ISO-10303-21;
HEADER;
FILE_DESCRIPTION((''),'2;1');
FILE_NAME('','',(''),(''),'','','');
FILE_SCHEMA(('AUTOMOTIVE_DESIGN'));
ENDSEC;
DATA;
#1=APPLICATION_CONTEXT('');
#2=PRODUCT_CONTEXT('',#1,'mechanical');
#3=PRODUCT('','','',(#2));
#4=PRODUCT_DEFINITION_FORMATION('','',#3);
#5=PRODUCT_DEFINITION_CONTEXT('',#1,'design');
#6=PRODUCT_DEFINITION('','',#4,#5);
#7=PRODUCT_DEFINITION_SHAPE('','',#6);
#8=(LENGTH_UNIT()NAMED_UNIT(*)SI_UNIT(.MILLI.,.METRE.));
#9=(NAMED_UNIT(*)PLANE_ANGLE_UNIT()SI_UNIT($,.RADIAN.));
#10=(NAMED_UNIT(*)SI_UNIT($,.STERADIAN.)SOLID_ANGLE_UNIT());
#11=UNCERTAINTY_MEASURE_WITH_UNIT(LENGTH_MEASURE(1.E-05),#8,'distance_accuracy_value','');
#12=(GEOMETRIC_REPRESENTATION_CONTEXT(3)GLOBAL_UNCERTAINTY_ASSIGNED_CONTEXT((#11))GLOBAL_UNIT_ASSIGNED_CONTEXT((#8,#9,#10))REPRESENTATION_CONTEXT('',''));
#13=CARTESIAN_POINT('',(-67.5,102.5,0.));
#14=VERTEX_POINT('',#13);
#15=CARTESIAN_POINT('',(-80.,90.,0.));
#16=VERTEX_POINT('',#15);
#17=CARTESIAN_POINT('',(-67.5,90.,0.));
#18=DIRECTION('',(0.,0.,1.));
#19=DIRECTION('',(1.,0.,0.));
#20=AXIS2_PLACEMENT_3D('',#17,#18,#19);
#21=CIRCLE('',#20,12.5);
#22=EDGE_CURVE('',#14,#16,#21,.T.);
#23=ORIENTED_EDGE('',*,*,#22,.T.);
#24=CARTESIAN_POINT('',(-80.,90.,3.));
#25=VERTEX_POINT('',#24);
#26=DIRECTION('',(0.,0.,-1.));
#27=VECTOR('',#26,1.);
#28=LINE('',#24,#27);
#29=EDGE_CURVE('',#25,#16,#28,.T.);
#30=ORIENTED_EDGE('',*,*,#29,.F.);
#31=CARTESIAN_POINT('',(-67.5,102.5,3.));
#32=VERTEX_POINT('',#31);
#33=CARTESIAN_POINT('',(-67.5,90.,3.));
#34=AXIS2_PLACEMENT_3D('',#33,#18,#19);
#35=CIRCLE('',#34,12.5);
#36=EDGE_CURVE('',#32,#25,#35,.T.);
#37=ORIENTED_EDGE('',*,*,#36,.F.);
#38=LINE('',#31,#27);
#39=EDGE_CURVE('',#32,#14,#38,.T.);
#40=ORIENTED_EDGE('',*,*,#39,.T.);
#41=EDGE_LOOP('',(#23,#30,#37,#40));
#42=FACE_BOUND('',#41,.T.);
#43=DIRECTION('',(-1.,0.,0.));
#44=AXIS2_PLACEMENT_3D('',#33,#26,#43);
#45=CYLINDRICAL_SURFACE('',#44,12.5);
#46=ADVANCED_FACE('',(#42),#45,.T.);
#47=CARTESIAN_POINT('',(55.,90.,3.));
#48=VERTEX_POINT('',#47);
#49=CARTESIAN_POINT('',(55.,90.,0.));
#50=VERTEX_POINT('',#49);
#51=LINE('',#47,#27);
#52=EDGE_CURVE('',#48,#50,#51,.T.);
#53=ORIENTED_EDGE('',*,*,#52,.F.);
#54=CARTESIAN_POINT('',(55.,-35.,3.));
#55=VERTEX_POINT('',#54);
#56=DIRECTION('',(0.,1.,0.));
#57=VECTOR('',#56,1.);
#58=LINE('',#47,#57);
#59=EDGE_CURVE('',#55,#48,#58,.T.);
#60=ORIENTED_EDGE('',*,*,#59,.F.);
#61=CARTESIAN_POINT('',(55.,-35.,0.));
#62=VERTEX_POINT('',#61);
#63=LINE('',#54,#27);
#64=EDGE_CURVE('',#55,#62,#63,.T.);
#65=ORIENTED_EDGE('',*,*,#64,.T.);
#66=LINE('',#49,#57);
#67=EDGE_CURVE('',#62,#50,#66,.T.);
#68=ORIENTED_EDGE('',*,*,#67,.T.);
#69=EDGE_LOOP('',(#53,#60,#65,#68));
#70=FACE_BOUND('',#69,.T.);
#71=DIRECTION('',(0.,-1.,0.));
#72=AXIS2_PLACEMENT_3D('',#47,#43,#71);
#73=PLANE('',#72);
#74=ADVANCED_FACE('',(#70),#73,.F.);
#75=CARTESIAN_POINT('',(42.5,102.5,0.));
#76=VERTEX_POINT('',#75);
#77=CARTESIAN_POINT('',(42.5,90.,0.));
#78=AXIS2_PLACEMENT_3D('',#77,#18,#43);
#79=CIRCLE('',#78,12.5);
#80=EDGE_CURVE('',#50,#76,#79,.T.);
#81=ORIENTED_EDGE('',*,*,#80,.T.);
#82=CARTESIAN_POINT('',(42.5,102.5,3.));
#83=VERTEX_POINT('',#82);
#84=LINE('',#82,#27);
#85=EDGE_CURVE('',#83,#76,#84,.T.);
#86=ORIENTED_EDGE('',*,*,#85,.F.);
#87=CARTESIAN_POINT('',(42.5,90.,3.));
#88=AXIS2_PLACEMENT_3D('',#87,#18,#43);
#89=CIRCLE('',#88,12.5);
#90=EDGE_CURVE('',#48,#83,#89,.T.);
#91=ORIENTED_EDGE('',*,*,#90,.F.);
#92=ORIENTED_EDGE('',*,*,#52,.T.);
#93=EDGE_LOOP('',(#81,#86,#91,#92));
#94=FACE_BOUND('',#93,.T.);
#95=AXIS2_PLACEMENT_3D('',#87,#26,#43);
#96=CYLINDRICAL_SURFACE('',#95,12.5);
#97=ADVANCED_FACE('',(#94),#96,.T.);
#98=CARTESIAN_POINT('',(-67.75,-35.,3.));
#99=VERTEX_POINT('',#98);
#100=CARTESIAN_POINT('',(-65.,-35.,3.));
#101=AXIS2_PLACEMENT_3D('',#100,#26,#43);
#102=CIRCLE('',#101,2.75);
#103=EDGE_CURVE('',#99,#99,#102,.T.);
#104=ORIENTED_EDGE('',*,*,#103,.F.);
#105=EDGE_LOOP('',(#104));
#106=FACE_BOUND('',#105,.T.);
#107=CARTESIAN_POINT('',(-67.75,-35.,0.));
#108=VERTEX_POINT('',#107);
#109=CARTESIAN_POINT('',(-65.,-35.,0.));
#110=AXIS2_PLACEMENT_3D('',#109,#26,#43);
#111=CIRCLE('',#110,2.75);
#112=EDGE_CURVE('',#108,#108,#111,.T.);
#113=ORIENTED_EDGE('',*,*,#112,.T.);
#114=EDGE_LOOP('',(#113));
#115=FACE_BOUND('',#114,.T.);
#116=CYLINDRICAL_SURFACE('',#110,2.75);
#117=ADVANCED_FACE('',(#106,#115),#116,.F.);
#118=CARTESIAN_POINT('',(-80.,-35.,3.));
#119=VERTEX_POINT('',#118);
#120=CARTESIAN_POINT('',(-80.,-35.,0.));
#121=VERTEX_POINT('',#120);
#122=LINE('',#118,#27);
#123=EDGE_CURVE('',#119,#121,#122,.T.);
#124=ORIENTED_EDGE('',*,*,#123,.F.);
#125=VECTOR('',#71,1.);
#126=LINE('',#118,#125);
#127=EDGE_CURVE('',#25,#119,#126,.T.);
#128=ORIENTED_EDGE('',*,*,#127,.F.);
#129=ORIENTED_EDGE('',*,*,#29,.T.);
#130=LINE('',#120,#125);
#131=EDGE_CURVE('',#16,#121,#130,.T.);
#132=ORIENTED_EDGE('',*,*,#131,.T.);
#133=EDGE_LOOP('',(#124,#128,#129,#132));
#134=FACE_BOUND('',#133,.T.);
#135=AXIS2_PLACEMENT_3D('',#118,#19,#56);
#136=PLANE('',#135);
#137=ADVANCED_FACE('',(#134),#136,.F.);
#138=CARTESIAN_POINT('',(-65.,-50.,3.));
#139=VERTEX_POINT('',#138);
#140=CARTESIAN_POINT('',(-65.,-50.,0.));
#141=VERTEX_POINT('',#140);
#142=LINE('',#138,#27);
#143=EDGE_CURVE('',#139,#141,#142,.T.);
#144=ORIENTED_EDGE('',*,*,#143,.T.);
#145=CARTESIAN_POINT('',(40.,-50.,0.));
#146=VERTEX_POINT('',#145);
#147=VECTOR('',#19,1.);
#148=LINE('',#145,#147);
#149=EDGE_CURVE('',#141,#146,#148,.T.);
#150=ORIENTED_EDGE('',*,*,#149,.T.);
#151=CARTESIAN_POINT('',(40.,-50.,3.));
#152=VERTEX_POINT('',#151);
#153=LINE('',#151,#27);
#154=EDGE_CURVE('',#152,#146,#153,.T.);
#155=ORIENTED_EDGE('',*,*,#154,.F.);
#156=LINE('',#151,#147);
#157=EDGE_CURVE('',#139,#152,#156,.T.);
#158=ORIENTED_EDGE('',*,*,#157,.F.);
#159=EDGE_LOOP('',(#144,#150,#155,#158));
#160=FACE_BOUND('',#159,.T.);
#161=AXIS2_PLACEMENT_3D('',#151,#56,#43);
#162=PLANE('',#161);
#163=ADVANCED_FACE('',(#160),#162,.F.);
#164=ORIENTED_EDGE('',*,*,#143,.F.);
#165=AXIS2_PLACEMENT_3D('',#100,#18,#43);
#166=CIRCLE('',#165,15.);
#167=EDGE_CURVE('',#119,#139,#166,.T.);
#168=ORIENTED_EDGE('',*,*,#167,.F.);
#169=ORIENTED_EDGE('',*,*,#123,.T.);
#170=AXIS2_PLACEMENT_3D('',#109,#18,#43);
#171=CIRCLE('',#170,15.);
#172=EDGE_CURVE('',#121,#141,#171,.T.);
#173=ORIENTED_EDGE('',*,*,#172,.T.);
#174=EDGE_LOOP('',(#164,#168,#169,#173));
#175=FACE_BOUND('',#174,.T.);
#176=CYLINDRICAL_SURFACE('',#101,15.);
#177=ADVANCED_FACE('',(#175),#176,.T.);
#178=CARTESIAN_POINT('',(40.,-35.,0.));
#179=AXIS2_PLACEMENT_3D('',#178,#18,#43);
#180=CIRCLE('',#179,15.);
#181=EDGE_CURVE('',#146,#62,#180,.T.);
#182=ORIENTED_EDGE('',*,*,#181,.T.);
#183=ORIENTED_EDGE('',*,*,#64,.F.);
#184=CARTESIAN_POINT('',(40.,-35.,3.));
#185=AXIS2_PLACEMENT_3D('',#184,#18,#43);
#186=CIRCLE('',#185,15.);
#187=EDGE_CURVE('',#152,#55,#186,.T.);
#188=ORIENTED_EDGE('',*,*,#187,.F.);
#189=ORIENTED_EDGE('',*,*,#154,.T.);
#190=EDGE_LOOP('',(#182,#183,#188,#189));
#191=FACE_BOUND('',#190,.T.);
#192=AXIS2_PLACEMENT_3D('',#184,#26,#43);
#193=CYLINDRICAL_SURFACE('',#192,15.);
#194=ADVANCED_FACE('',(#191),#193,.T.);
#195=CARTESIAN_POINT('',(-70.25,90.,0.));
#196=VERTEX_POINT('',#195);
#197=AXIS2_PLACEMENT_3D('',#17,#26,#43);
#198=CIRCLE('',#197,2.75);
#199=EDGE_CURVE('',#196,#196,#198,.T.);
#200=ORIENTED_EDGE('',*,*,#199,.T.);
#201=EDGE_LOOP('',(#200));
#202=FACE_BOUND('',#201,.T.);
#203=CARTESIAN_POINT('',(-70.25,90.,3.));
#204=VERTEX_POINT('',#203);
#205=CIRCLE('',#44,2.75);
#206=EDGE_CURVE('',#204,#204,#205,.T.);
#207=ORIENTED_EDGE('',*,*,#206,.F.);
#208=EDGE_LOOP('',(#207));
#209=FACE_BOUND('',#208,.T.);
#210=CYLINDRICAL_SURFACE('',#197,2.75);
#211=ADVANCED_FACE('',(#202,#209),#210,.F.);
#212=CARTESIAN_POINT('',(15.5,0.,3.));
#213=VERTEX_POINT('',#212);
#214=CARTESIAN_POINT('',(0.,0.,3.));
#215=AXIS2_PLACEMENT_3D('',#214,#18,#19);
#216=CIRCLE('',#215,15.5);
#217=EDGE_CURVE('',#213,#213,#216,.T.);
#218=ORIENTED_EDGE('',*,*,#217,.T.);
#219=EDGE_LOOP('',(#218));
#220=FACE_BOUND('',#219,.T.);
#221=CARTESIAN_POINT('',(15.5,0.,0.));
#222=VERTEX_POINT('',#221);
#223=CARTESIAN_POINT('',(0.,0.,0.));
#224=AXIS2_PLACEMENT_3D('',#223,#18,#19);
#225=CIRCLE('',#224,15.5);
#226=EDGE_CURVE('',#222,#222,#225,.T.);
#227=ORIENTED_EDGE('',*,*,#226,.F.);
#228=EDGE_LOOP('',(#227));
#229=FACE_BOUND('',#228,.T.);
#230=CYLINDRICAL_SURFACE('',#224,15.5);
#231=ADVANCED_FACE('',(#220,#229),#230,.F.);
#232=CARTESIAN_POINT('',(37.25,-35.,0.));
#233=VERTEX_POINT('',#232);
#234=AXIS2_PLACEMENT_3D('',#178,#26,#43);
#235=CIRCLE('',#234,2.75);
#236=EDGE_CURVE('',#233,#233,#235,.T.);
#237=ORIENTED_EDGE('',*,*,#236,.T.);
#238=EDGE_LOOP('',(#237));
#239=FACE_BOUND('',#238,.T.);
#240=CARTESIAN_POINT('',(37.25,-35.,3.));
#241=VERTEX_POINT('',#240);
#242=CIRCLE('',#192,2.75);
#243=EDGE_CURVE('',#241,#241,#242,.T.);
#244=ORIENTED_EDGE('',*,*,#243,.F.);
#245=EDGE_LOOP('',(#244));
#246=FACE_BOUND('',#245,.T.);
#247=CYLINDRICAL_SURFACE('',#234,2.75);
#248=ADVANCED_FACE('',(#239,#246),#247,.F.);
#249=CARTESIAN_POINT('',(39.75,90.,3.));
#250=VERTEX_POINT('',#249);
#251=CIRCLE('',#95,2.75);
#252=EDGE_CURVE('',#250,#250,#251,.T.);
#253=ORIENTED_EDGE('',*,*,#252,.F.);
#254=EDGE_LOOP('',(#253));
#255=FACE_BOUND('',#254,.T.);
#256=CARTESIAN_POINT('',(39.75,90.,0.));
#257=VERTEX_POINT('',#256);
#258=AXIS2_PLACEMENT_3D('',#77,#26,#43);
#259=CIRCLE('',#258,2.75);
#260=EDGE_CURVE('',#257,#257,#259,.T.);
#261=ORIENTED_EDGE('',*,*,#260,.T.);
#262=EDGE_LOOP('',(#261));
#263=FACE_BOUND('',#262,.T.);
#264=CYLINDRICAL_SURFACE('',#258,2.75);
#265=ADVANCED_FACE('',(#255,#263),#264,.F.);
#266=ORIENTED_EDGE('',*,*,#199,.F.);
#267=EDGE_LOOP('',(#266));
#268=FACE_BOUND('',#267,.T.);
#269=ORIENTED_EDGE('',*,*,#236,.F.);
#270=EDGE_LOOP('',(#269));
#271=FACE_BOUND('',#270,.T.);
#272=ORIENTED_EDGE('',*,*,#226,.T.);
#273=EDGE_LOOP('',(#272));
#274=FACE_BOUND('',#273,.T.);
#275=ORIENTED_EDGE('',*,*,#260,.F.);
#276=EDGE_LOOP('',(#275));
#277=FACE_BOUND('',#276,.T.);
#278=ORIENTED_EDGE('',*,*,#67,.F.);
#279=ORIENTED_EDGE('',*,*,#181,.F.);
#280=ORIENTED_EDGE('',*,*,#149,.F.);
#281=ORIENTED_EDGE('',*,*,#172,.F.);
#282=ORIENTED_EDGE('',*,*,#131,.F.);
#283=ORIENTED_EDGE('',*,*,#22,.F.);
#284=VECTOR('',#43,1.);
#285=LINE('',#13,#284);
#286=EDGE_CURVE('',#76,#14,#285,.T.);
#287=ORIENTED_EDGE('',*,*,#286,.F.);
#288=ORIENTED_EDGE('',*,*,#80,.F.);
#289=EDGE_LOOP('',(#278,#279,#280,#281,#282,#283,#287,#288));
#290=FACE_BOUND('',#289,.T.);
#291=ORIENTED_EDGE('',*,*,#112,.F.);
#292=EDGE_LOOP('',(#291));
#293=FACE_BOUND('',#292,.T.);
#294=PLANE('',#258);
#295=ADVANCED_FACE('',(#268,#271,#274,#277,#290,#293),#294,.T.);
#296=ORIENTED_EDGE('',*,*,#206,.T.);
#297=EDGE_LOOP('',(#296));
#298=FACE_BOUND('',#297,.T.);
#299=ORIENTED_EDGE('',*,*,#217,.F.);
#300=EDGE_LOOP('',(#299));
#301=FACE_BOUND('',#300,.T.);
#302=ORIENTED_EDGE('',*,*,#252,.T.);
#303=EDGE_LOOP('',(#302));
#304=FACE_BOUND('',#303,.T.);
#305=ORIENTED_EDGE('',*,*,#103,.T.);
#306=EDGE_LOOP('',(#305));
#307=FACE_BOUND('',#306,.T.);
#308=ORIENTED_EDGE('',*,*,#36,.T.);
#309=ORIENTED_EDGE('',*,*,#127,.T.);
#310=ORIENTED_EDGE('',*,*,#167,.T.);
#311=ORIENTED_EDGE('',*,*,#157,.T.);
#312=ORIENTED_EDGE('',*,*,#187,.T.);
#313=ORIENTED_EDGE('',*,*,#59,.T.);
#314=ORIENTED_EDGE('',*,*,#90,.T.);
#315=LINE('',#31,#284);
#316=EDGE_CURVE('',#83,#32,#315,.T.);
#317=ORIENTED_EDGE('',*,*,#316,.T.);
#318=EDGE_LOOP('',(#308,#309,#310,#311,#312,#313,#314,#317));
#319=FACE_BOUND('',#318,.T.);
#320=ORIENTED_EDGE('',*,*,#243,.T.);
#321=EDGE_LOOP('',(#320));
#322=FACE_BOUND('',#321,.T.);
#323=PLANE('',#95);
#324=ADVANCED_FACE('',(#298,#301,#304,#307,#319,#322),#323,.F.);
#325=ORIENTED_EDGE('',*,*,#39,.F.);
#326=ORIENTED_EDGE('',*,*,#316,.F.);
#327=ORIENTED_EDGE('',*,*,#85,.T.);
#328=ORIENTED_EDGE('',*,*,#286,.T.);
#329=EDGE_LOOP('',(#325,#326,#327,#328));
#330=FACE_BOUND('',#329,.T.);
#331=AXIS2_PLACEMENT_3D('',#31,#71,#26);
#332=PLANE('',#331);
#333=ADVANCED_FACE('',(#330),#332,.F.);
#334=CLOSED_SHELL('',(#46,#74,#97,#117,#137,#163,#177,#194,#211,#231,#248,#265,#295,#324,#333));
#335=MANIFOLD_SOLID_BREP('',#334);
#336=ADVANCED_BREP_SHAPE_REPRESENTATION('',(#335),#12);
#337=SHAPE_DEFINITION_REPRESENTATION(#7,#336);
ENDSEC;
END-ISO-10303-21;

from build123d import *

# Parameters (mm, degrees)
BASE_FLANGE1_DEPTH   = 3
SKETCH2_R            = 15.5
CUT_EXTRUDE1_DEPTH   = 131.05864062
M5_CLEARANCE_HOLE1_D = 5.5


# Sheet-metal steps are written as plain solids
with BuildPart() as part:
    # Sketch1 → Base-Flange1 (new body)
    with BuildSketch(Plane.XY):
        with BuildLine():
            Line((-67.5, 102.5), (42.5, 102.5))
            ThreePointArc((42.5, 102.5), (51.338834765, 98.838834765), (55, 90))
            Line((55, 90), (55, -35))
            ThreePointArc((55, -35), (50.606601718, -45.606601718), (40, -50))
            Line((40, -50), (-65, -50))
            ThreePointArc((-65, -50), (-75.606601718, -45.606601718), (-80, -35))
            Line((-80, -35), (-80, 90))
            ThreePointArc((-80, 90), (-76.338834765, 98.838834765), (-67.5, 102.5))
        make_face()
    extrude(amount=BASE_FLANGE1_DEPTH)

    # Sketch2 → Cut-Extrude1 (cut, through all)
    with BuildSketch(Plane.XY.offset(3)):
        Circle(SKETCH2_R)
    extrude(amount=-CUT_EXTRUDE1_DEPTH, mode=Mode.SUBTRACT)

    # M5 Clearance Hole1 (through all)
    with Locations(Plane(origin=(0, 0, 0), x_dir=(-1, 0, 0), z_dir=(0, 0, -1))):
        with Locations((-40, -35), (67.5, 90), (65, -35), (-42.5, 90)):
            Hole(M5_CLEARANCE_HOLE1_D / 2)


solid = part.part
